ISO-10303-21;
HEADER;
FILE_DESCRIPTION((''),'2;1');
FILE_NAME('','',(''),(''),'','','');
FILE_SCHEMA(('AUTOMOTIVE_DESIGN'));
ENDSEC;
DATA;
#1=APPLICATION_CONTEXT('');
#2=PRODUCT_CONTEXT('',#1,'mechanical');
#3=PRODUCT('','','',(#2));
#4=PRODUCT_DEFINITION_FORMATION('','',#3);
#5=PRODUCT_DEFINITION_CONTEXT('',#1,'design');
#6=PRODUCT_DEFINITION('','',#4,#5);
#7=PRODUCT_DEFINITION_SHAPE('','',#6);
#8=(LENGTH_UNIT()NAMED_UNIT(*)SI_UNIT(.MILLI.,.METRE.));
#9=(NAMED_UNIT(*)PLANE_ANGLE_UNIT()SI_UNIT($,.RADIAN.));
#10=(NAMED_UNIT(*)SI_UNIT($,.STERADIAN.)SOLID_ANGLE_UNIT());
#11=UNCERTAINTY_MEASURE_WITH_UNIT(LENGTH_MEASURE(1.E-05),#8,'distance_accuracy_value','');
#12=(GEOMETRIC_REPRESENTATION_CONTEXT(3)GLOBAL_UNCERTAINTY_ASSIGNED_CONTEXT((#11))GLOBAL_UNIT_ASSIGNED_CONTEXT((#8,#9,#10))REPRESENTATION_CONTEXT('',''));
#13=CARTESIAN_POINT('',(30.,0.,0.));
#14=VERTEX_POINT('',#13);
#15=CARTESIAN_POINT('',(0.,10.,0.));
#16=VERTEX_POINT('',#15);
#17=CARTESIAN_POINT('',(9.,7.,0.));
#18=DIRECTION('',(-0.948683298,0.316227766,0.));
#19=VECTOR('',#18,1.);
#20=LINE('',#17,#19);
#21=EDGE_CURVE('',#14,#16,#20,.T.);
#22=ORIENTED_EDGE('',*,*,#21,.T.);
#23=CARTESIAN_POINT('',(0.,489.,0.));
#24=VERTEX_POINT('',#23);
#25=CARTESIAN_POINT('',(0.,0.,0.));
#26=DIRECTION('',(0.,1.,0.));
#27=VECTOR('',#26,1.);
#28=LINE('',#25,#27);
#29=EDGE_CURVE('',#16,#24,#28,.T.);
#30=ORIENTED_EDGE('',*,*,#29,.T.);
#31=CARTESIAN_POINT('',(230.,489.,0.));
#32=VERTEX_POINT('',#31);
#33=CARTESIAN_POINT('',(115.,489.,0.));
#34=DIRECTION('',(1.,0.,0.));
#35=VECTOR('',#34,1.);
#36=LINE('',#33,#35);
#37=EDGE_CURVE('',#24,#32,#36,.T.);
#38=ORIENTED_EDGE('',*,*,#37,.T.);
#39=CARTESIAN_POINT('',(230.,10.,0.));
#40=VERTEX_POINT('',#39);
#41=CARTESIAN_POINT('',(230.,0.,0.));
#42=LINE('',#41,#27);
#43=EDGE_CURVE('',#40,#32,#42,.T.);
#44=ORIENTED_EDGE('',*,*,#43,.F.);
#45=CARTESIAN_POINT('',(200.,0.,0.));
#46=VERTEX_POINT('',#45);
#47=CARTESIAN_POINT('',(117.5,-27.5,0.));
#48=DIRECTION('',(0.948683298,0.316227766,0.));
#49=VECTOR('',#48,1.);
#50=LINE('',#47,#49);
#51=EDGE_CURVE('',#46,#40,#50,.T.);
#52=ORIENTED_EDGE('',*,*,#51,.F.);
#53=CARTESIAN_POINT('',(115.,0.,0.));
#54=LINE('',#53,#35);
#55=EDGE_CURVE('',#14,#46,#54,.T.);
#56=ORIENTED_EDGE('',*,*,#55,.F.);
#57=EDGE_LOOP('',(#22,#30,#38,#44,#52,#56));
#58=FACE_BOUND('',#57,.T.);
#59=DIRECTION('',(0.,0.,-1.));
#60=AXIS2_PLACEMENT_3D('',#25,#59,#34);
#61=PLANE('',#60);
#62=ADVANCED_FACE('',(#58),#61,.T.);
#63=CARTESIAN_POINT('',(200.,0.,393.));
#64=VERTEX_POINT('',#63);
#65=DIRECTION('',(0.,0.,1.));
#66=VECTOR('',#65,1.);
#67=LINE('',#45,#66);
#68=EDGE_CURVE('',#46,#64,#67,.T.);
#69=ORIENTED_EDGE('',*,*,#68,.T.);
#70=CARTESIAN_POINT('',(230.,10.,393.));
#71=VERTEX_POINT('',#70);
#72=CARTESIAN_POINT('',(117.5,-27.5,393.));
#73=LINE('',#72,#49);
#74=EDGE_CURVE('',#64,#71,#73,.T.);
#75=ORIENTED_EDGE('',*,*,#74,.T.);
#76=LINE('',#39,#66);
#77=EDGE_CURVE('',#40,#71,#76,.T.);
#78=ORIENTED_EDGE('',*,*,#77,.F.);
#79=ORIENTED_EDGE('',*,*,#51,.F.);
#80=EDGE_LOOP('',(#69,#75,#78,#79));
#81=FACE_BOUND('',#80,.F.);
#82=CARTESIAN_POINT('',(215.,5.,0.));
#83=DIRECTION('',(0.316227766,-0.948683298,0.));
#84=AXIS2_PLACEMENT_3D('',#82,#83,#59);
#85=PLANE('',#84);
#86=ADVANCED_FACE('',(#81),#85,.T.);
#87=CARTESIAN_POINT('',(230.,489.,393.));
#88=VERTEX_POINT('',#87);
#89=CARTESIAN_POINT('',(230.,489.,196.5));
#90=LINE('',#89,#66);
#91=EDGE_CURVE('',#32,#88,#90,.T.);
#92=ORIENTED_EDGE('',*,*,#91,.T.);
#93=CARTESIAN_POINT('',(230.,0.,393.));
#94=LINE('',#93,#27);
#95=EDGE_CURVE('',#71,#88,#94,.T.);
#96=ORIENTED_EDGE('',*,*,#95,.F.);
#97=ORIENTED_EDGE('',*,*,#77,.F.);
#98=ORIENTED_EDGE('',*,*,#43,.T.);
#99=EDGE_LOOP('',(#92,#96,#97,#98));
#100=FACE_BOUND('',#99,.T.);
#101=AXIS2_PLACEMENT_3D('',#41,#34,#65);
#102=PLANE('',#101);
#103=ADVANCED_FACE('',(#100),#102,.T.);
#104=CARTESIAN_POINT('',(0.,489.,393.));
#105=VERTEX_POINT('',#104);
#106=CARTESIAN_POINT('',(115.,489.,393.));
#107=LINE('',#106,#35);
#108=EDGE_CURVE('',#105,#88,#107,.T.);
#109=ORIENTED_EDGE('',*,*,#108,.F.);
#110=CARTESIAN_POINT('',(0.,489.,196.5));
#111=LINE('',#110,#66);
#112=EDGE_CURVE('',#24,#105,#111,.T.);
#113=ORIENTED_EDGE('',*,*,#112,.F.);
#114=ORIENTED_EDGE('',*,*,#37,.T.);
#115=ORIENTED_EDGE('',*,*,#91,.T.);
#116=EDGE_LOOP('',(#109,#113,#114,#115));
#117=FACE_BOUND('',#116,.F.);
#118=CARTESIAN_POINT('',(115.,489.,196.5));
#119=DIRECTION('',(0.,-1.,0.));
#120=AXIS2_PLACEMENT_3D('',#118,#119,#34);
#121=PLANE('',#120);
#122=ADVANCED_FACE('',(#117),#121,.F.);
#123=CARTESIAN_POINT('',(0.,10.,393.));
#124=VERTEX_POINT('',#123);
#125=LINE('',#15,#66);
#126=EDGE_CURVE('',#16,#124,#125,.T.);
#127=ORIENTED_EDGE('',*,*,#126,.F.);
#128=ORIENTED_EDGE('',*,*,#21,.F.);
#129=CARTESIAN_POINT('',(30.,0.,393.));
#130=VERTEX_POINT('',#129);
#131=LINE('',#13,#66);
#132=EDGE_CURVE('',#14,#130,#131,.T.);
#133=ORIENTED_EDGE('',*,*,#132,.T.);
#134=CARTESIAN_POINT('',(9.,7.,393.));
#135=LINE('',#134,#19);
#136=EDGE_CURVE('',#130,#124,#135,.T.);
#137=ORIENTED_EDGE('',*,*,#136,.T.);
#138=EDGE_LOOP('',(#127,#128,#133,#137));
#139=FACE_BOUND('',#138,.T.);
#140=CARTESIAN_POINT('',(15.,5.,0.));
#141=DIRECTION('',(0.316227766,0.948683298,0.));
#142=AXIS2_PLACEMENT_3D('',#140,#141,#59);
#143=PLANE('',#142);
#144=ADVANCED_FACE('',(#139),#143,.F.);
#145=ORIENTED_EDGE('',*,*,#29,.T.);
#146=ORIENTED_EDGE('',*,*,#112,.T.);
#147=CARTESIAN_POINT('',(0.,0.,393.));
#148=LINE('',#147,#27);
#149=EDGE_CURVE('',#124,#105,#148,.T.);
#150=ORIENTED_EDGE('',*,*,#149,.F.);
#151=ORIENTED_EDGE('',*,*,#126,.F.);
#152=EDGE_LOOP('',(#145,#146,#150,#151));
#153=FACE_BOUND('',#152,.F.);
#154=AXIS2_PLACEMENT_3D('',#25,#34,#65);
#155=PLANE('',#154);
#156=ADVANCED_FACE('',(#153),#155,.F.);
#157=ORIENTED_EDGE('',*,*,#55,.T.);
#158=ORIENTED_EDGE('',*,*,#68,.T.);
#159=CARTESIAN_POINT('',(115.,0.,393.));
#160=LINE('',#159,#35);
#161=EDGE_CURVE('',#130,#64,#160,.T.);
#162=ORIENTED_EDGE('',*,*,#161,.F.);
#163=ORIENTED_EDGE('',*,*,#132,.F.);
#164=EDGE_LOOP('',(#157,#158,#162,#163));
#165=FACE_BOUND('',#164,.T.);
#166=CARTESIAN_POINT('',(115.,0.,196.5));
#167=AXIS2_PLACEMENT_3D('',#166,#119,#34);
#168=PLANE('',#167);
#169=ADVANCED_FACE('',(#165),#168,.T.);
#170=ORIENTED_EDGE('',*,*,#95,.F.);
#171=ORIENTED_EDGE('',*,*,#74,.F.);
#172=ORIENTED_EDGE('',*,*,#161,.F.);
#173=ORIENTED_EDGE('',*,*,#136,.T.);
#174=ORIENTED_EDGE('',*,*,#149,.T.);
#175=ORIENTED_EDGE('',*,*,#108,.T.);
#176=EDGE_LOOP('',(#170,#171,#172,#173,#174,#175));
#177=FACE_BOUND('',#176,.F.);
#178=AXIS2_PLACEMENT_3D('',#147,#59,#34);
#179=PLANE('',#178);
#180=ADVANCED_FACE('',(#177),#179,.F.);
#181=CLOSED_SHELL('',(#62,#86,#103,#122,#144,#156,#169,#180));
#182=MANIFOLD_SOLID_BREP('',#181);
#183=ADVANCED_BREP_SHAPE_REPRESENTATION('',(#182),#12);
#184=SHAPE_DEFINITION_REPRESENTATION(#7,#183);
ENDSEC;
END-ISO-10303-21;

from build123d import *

# Parameters (mm, degrees)
F0_W     = 230
F0_H     = 393
F1_DEPTH = 489
F2_SIZE2 = 10
F2_SIZE  = 30


with BuildPart() as f1:
    # F0 (on Front) → F1 (new body)
    with BuildSketch(Plane.XZ):
        with Locations((115, 196.5)):
            Rectangle(F0_W, F0_H)
    extrude(amount=-F1_DEPTH)

    # F2
    f2_edges = [f1.edges().sort_by_distance(p)[0] for p in [
        (230, 0, 196.5),
        (0, 0, 196.5),
    ]]
    f2_side = f1.faces().sort_by_distance((115, 0, 196.5))[0]
    chamfer(f2_edges, length=F2_SIZE, length2=F2_SIZE2, reference=f2_side)


solid = f1.part
